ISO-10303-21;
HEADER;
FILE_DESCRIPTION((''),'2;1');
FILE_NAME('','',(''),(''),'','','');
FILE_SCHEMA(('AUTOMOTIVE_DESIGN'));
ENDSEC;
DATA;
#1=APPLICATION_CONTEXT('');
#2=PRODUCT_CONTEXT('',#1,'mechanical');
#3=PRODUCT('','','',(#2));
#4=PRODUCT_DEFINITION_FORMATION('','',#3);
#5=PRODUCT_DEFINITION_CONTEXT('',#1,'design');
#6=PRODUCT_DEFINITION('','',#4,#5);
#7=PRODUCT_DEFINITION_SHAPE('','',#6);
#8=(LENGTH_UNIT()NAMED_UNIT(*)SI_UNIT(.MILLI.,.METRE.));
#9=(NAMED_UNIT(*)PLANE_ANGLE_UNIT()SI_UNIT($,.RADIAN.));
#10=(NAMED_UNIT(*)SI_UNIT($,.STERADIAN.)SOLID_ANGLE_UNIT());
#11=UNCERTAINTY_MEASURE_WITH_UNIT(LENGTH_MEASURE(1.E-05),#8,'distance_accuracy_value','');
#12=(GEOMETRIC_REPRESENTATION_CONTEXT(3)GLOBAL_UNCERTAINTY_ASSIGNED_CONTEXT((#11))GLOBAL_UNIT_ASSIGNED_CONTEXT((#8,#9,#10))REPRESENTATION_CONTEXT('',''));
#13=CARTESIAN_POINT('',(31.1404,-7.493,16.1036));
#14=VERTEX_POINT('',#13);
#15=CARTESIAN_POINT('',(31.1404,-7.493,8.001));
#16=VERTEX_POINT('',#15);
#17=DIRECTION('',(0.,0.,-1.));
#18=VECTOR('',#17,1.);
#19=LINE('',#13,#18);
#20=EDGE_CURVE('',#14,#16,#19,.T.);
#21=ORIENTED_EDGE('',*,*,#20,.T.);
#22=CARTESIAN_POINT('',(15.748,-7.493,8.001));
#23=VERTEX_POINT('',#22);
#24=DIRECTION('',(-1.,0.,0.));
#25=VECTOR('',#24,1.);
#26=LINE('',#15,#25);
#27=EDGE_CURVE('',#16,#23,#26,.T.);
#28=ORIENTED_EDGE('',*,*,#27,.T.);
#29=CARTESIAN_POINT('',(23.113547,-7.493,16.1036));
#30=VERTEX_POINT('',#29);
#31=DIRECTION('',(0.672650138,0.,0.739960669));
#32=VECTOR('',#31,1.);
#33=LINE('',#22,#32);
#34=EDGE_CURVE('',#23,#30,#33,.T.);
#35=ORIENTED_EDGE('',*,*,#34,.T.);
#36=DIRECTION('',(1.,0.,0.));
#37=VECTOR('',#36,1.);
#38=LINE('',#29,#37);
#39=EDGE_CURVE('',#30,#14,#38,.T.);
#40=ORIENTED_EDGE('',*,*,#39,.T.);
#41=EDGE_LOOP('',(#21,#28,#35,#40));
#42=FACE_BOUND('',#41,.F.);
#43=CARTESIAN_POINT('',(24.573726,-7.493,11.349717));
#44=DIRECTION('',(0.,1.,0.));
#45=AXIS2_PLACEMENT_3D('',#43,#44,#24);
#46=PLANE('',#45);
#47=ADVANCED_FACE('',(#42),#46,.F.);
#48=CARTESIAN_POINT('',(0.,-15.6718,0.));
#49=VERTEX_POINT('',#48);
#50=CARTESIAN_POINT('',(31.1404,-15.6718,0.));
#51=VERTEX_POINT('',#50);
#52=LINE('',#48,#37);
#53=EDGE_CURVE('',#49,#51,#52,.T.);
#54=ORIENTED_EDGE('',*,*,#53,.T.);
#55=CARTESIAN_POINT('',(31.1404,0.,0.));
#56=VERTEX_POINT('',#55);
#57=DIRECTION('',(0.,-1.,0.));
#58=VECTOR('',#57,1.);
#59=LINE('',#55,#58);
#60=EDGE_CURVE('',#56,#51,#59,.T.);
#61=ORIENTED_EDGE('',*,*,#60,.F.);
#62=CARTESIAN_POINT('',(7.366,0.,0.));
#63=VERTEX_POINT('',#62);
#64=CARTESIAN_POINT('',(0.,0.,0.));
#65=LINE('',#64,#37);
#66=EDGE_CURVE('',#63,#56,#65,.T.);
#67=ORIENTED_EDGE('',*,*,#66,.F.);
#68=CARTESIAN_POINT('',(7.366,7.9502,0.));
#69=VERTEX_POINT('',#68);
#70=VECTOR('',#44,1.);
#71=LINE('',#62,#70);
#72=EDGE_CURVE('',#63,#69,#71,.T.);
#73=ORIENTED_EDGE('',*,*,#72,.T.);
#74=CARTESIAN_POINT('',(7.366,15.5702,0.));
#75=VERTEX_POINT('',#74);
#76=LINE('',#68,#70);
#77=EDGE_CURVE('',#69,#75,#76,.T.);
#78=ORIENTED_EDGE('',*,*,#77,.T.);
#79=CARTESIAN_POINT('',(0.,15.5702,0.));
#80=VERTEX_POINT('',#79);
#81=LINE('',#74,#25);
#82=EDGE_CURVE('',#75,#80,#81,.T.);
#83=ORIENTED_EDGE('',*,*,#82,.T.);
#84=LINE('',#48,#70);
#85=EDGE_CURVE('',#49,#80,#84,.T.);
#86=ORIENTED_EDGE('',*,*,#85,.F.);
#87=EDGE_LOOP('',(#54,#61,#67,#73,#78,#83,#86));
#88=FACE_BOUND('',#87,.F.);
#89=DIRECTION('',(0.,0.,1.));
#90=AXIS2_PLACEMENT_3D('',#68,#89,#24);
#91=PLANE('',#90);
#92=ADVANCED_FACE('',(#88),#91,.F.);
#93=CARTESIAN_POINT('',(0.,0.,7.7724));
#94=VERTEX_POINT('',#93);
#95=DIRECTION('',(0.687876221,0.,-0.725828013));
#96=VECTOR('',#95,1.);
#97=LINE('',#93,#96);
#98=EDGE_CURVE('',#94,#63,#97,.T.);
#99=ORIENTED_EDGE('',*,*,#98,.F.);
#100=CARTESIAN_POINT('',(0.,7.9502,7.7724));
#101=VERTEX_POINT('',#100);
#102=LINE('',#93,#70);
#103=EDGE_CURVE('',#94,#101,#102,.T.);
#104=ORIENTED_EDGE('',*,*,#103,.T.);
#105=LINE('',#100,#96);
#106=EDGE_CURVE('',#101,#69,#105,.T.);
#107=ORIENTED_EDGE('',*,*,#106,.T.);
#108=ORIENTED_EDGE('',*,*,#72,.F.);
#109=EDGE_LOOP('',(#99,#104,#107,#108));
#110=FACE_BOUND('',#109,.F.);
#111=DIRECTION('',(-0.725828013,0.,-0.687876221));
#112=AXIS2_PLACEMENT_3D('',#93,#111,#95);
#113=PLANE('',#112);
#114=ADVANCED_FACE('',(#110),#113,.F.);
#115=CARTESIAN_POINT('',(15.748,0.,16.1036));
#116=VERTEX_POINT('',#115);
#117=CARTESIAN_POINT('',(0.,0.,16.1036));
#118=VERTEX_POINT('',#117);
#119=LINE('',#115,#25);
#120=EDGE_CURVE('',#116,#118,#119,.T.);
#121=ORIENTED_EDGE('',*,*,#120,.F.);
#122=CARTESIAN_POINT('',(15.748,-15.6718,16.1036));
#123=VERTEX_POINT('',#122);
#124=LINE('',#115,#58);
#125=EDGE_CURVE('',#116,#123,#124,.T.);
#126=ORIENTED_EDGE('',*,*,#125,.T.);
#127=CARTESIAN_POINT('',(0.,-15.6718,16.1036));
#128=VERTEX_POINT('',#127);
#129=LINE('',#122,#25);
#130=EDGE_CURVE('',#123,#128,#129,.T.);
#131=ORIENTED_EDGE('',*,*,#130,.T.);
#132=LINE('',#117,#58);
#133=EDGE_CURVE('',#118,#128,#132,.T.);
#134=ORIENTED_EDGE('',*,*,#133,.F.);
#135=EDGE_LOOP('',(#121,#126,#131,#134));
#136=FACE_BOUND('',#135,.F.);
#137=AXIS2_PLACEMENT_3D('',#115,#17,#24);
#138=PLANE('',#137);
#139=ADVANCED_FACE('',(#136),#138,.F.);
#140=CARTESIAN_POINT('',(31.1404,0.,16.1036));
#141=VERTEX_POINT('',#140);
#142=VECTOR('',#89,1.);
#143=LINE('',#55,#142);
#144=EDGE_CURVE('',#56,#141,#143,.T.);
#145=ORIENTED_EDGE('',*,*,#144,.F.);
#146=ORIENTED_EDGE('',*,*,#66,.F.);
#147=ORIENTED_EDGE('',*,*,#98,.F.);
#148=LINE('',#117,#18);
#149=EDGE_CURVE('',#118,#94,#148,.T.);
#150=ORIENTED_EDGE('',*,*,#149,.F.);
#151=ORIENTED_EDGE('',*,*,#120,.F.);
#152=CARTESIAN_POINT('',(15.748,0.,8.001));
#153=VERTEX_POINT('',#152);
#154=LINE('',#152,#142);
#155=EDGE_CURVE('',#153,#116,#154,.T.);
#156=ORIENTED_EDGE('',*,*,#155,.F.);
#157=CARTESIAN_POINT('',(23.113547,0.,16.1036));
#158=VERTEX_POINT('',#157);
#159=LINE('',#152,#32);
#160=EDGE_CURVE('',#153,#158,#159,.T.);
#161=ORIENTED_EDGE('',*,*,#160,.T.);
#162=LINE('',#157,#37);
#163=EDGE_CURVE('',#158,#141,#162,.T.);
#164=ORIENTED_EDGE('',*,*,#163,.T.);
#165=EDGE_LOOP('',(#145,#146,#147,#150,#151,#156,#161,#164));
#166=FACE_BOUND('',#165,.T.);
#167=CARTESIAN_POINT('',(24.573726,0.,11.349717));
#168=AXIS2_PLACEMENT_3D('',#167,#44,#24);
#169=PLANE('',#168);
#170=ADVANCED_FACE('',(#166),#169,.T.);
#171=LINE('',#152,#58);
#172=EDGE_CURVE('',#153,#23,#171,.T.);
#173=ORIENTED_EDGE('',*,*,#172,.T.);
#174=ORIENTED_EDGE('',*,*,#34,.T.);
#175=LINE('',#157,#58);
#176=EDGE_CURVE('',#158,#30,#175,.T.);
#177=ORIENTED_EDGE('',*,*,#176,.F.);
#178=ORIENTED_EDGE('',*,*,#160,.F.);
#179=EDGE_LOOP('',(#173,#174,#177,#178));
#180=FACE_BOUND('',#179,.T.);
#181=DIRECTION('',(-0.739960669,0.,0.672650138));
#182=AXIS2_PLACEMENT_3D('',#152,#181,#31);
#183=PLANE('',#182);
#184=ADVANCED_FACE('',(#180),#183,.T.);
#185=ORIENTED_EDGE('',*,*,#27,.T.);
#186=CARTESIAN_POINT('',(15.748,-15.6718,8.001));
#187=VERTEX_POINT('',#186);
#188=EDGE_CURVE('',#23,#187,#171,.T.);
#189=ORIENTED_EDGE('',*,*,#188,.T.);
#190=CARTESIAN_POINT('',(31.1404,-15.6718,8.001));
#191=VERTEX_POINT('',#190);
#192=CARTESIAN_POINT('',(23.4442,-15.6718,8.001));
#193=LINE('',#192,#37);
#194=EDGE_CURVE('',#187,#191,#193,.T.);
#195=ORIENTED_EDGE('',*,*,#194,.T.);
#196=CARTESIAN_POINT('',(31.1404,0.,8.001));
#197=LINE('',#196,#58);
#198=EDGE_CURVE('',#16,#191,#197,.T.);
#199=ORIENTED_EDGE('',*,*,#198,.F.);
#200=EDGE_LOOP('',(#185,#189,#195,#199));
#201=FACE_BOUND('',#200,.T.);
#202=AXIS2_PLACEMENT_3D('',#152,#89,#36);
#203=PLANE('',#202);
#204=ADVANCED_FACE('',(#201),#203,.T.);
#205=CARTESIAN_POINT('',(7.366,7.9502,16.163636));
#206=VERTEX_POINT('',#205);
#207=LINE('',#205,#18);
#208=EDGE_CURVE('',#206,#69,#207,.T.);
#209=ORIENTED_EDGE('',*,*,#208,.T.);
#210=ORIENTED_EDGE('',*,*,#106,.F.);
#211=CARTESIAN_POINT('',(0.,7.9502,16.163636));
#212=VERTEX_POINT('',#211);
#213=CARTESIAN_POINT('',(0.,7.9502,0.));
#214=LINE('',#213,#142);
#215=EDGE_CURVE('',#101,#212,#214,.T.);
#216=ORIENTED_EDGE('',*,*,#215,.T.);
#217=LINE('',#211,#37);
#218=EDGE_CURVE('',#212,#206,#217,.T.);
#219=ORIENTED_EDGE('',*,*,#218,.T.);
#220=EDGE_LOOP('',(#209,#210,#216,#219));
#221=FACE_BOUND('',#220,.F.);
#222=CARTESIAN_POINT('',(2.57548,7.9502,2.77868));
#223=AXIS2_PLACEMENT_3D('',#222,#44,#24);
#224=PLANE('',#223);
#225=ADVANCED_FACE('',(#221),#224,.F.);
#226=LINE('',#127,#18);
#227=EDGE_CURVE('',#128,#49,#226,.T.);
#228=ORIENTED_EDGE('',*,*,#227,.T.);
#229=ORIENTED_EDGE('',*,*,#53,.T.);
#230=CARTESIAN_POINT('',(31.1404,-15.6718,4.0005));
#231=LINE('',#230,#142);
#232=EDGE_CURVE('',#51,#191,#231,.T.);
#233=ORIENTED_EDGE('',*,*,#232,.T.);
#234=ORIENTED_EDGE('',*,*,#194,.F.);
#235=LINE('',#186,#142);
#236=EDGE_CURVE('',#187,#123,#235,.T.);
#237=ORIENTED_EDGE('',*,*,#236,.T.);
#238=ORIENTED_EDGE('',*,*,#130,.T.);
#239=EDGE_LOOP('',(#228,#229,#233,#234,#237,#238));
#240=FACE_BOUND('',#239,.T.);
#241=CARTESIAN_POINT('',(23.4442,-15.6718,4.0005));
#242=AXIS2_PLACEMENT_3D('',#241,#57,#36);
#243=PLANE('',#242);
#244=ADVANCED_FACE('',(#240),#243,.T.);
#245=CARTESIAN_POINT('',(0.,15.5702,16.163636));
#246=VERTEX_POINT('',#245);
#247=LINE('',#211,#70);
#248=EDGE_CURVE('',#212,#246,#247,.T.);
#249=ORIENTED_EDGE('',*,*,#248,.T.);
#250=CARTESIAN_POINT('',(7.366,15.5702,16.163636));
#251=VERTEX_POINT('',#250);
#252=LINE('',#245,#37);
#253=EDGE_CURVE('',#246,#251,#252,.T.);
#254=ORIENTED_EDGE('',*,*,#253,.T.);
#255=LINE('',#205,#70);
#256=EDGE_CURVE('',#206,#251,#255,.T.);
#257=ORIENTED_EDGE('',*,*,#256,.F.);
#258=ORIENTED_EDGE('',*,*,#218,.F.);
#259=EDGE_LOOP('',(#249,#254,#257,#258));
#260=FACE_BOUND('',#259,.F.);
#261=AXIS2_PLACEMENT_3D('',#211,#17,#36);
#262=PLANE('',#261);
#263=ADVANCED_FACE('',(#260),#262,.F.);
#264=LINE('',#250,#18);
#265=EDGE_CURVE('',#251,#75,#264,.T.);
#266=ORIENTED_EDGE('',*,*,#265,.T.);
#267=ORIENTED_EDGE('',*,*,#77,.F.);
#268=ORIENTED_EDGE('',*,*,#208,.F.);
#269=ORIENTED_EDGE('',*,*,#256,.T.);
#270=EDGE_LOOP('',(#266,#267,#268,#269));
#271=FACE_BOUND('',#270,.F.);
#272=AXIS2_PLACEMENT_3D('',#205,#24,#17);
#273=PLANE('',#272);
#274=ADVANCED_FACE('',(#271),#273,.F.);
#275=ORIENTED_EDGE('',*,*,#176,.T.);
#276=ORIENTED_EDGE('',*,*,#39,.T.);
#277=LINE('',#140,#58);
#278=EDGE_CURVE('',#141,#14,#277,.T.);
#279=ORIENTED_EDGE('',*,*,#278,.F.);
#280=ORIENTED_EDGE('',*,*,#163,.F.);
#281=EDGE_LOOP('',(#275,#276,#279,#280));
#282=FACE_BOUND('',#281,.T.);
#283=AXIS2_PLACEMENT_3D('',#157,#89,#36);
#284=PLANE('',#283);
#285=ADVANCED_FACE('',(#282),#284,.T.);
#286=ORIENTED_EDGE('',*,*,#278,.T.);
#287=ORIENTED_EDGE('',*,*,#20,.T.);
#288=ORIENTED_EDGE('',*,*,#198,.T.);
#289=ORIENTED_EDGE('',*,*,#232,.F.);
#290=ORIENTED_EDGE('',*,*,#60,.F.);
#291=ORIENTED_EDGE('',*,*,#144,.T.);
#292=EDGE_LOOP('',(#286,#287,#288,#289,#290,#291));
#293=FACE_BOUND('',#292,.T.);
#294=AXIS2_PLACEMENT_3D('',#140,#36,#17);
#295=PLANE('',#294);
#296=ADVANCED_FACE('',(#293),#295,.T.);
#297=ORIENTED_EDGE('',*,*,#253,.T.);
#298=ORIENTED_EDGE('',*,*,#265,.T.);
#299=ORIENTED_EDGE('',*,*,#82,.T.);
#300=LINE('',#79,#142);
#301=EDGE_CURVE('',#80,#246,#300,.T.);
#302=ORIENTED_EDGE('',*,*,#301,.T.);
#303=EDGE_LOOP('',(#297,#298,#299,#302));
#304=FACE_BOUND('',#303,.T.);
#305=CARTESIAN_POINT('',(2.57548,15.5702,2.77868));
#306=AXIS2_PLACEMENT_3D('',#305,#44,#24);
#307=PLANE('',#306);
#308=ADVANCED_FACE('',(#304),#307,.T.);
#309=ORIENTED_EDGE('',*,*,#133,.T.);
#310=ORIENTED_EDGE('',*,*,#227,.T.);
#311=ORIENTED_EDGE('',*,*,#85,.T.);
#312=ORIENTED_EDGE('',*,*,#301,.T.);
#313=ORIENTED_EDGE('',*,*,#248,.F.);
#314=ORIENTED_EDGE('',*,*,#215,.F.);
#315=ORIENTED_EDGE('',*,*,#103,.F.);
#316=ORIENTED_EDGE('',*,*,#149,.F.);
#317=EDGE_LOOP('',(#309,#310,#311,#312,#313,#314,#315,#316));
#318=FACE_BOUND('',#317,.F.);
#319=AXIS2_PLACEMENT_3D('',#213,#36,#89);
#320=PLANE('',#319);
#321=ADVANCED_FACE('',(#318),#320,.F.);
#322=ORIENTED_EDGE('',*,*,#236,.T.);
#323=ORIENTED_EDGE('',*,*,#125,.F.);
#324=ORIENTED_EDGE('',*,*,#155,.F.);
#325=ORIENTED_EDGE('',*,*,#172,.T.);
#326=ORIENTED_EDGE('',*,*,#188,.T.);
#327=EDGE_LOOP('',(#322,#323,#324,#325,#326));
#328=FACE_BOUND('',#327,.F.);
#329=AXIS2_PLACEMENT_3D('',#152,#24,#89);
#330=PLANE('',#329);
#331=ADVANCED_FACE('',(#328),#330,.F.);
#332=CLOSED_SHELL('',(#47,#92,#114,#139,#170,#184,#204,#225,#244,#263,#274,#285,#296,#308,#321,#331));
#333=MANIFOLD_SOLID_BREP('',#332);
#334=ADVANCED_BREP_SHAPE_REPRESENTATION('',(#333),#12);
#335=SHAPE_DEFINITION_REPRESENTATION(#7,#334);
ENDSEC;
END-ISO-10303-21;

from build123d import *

# Parameters (mm, degrees)
F0_W     = 15.3924
F0_H     = 8.001
F1_DEPTH = 15.6718
F3_DEPTH = 7.493
F5_DEPTH = 7.9502
F7_DEPTH = 7.62


with BuildPart() as f1:
    # F0 (on Front) → F1 (new body)
    with BuildSketch(Plane.XZ):
        with Locations((23.4442, 4.0005)):
            Rectangle(F0_W, F0_H)
        Polygon((0, 16.1036), (0, 0), (15.748, 0), (15.748, 8.001), (15.748, 16.1036), align=None)
    extrude(amount=F1_DEPTH)

    # F2 (on face) → F3 (join)
    with BuildSketch(Plane(origin=(0, 0, 0), x_dir=(-1, 0, 0), z_dir=(0, 1, 0))):
        Polygon((-31.1404, 16.1036), (-31.1404, 8.001), (-15.748, 8.001), (-23.113546893, 16.1036), align=None)
    extrude(amount=-F3_DEPTH)

    # F4 (on face) → F5 (join)
    with BuildSketch(Plane(origin=(0, 0, 0), x_dir=(-1, 0, 0), z_dir=(0, 1, 0))):
        Polygon((-7.366, 0), (0, 0), (0, 7.7724), align=None)
    extrude(amount=F5_DEPTH)

    # F6 (on face) → F7 (join)
    with BuildSketch(Plane(origin=(0, 7.9502, 0), x_dir=(-1, 0, 0), z_dir=(0, 1, 0))):
        Polygon((-7.366, 0), (0, 0), (0, 7.7724), align=None)
        Polygon((-7.366, 16.163635999), (-7.366, 0), (0, 7.7724), (0, 16.163635999), align=None)
    extrude(amount=F7_DEPTH)


solid = f1.part
